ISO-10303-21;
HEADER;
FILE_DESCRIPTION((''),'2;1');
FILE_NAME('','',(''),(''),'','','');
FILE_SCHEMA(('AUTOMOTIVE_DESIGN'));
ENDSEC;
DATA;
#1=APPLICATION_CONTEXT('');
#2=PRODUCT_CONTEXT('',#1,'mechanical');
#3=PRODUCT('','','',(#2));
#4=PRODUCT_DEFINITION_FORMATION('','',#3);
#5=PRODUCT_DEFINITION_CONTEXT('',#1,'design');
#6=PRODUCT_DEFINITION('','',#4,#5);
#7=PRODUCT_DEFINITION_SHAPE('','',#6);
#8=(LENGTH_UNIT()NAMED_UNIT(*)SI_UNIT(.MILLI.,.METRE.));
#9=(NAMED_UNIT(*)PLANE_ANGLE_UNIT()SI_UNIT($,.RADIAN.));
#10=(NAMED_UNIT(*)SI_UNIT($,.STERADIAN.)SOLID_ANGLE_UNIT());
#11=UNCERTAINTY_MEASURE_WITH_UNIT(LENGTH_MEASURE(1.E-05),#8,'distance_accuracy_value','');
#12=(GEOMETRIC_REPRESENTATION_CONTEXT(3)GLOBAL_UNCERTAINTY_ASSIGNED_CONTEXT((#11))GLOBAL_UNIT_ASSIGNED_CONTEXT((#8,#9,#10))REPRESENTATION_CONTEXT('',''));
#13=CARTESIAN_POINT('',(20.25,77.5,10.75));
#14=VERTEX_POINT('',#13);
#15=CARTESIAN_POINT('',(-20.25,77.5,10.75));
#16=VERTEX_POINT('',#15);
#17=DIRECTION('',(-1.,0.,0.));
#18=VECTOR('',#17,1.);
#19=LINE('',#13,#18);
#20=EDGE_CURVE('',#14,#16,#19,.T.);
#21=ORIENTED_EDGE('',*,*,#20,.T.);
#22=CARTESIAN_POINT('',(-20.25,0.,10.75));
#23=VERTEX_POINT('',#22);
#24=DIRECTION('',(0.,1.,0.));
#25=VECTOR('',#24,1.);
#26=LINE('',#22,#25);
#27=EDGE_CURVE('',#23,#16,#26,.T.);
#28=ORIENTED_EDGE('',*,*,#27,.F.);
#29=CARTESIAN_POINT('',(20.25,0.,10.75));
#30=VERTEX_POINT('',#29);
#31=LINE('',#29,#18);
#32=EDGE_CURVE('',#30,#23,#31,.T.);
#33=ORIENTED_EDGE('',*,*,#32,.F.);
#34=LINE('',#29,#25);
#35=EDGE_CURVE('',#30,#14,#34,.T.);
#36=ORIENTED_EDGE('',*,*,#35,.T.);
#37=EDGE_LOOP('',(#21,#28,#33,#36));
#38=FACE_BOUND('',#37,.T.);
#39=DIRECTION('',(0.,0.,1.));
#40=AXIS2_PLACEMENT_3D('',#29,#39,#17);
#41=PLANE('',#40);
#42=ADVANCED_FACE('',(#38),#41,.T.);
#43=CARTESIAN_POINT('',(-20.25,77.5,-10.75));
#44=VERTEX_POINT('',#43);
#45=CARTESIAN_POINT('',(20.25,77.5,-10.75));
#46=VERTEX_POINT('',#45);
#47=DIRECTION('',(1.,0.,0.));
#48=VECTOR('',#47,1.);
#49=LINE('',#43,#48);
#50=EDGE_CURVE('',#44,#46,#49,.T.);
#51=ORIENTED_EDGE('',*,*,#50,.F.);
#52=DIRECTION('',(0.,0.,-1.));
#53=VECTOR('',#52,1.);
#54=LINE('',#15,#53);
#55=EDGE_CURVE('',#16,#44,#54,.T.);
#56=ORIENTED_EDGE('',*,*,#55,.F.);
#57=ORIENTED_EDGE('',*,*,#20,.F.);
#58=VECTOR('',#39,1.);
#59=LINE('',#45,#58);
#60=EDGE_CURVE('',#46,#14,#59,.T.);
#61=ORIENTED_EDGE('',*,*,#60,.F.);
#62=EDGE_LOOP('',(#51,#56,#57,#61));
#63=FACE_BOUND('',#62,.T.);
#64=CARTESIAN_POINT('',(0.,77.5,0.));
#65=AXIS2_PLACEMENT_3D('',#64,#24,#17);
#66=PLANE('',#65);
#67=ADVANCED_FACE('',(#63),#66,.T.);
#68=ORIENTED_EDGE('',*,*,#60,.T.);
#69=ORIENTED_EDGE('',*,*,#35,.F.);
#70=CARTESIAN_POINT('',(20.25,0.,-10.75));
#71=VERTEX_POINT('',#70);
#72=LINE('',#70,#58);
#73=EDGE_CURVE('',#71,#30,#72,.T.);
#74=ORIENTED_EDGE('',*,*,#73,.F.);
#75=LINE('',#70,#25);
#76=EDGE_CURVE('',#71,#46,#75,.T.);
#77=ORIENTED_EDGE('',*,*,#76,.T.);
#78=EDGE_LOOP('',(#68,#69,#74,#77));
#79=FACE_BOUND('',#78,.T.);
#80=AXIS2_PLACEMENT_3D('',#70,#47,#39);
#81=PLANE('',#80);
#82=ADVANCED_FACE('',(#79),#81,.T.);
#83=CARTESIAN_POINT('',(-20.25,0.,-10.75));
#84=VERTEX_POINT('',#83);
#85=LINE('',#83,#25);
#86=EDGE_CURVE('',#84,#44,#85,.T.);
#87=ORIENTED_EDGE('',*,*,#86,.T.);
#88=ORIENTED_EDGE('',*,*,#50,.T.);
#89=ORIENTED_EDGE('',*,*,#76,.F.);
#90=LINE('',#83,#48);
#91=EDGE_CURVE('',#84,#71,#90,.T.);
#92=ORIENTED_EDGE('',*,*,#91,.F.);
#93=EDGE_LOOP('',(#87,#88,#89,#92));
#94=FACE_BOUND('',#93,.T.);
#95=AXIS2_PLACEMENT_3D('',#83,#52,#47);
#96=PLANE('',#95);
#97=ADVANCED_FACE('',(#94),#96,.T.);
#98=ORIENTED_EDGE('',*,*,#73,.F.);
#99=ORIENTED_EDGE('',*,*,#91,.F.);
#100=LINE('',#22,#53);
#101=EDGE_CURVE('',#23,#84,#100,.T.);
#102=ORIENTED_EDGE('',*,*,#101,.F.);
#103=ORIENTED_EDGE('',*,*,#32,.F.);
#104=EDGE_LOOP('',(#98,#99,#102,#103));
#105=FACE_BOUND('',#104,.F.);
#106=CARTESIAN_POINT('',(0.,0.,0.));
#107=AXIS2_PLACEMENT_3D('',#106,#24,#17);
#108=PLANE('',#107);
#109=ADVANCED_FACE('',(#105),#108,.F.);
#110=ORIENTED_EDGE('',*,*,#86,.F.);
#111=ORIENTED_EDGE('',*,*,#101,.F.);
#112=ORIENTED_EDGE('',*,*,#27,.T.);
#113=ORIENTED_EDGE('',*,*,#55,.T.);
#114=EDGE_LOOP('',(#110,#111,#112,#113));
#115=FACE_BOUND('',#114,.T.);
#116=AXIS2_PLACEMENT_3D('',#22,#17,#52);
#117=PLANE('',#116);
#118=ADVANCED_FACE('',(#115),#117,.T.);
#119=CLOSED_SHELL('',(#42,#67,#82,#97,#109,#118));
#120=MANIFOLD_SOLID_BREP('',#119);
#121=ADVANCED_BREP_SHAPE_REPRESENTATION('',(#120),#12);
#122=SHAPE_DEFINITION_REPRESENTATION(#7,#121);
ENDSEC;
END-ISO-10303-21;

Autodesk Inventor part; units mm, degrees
ref_plane "YZ Plane" through (0, 0, 0) normal (1, 0, 0) x (0, 1, 0)
ref_plane "XZ Plane" through (0, 0, 0) normal (0, 1, 0) x (-1, 0, 0)
ref_plane "XY Plane" through (0, 0, 0) normal (0, 0, 1) x (1, 0, 0)
sketch "Sketch1" plane through (0, 0, 0) normal (0, 1, 0) x (-1, 0, 0)
  line L0 (-20.25, 10.75) -> (20.25, 10.75)
  line L1 (20.25, 10.75) -> (20.25, -10.75)
  line L2 (20.25, -10.75) -> (-20.25, -10.75)
  line L3 (-20.25, -10.75) -> (-20.25, 10.75)
  line L4 (-20.25, 10.75) -> (20.25, -10.75) construction
  line L5 (20.25, 10.75) -> (-20.25, -10.75) construction
  point P0 (0, 0)
  point P1 (0, -10.75)
  dimension "d0" = 40.5
  dimension "d1" = 21.5
extrude "Extrusion1" add sketch "Sketch1" along normal blind 77.5
sketch "Sketch2" plane through (20.25, 0, 10.75) normal (1, 0, 0) x (0, 0, -1)
  line L0 (12.7144, 53.8105) -> (12.7144, 26.87) construction
  line L1 (12.7144, 26.87) -> (3.5472, 26.87) construction
  line L2 (3.5472, 26.87) -> (3.5472, 53.8105) construction
  line L3 (3.5472, 53.8105) -> (12.7144, 53.8105) construction
  point P0 (10.75, 0)
mark "Mark1"
properties part number "Battery pack"
